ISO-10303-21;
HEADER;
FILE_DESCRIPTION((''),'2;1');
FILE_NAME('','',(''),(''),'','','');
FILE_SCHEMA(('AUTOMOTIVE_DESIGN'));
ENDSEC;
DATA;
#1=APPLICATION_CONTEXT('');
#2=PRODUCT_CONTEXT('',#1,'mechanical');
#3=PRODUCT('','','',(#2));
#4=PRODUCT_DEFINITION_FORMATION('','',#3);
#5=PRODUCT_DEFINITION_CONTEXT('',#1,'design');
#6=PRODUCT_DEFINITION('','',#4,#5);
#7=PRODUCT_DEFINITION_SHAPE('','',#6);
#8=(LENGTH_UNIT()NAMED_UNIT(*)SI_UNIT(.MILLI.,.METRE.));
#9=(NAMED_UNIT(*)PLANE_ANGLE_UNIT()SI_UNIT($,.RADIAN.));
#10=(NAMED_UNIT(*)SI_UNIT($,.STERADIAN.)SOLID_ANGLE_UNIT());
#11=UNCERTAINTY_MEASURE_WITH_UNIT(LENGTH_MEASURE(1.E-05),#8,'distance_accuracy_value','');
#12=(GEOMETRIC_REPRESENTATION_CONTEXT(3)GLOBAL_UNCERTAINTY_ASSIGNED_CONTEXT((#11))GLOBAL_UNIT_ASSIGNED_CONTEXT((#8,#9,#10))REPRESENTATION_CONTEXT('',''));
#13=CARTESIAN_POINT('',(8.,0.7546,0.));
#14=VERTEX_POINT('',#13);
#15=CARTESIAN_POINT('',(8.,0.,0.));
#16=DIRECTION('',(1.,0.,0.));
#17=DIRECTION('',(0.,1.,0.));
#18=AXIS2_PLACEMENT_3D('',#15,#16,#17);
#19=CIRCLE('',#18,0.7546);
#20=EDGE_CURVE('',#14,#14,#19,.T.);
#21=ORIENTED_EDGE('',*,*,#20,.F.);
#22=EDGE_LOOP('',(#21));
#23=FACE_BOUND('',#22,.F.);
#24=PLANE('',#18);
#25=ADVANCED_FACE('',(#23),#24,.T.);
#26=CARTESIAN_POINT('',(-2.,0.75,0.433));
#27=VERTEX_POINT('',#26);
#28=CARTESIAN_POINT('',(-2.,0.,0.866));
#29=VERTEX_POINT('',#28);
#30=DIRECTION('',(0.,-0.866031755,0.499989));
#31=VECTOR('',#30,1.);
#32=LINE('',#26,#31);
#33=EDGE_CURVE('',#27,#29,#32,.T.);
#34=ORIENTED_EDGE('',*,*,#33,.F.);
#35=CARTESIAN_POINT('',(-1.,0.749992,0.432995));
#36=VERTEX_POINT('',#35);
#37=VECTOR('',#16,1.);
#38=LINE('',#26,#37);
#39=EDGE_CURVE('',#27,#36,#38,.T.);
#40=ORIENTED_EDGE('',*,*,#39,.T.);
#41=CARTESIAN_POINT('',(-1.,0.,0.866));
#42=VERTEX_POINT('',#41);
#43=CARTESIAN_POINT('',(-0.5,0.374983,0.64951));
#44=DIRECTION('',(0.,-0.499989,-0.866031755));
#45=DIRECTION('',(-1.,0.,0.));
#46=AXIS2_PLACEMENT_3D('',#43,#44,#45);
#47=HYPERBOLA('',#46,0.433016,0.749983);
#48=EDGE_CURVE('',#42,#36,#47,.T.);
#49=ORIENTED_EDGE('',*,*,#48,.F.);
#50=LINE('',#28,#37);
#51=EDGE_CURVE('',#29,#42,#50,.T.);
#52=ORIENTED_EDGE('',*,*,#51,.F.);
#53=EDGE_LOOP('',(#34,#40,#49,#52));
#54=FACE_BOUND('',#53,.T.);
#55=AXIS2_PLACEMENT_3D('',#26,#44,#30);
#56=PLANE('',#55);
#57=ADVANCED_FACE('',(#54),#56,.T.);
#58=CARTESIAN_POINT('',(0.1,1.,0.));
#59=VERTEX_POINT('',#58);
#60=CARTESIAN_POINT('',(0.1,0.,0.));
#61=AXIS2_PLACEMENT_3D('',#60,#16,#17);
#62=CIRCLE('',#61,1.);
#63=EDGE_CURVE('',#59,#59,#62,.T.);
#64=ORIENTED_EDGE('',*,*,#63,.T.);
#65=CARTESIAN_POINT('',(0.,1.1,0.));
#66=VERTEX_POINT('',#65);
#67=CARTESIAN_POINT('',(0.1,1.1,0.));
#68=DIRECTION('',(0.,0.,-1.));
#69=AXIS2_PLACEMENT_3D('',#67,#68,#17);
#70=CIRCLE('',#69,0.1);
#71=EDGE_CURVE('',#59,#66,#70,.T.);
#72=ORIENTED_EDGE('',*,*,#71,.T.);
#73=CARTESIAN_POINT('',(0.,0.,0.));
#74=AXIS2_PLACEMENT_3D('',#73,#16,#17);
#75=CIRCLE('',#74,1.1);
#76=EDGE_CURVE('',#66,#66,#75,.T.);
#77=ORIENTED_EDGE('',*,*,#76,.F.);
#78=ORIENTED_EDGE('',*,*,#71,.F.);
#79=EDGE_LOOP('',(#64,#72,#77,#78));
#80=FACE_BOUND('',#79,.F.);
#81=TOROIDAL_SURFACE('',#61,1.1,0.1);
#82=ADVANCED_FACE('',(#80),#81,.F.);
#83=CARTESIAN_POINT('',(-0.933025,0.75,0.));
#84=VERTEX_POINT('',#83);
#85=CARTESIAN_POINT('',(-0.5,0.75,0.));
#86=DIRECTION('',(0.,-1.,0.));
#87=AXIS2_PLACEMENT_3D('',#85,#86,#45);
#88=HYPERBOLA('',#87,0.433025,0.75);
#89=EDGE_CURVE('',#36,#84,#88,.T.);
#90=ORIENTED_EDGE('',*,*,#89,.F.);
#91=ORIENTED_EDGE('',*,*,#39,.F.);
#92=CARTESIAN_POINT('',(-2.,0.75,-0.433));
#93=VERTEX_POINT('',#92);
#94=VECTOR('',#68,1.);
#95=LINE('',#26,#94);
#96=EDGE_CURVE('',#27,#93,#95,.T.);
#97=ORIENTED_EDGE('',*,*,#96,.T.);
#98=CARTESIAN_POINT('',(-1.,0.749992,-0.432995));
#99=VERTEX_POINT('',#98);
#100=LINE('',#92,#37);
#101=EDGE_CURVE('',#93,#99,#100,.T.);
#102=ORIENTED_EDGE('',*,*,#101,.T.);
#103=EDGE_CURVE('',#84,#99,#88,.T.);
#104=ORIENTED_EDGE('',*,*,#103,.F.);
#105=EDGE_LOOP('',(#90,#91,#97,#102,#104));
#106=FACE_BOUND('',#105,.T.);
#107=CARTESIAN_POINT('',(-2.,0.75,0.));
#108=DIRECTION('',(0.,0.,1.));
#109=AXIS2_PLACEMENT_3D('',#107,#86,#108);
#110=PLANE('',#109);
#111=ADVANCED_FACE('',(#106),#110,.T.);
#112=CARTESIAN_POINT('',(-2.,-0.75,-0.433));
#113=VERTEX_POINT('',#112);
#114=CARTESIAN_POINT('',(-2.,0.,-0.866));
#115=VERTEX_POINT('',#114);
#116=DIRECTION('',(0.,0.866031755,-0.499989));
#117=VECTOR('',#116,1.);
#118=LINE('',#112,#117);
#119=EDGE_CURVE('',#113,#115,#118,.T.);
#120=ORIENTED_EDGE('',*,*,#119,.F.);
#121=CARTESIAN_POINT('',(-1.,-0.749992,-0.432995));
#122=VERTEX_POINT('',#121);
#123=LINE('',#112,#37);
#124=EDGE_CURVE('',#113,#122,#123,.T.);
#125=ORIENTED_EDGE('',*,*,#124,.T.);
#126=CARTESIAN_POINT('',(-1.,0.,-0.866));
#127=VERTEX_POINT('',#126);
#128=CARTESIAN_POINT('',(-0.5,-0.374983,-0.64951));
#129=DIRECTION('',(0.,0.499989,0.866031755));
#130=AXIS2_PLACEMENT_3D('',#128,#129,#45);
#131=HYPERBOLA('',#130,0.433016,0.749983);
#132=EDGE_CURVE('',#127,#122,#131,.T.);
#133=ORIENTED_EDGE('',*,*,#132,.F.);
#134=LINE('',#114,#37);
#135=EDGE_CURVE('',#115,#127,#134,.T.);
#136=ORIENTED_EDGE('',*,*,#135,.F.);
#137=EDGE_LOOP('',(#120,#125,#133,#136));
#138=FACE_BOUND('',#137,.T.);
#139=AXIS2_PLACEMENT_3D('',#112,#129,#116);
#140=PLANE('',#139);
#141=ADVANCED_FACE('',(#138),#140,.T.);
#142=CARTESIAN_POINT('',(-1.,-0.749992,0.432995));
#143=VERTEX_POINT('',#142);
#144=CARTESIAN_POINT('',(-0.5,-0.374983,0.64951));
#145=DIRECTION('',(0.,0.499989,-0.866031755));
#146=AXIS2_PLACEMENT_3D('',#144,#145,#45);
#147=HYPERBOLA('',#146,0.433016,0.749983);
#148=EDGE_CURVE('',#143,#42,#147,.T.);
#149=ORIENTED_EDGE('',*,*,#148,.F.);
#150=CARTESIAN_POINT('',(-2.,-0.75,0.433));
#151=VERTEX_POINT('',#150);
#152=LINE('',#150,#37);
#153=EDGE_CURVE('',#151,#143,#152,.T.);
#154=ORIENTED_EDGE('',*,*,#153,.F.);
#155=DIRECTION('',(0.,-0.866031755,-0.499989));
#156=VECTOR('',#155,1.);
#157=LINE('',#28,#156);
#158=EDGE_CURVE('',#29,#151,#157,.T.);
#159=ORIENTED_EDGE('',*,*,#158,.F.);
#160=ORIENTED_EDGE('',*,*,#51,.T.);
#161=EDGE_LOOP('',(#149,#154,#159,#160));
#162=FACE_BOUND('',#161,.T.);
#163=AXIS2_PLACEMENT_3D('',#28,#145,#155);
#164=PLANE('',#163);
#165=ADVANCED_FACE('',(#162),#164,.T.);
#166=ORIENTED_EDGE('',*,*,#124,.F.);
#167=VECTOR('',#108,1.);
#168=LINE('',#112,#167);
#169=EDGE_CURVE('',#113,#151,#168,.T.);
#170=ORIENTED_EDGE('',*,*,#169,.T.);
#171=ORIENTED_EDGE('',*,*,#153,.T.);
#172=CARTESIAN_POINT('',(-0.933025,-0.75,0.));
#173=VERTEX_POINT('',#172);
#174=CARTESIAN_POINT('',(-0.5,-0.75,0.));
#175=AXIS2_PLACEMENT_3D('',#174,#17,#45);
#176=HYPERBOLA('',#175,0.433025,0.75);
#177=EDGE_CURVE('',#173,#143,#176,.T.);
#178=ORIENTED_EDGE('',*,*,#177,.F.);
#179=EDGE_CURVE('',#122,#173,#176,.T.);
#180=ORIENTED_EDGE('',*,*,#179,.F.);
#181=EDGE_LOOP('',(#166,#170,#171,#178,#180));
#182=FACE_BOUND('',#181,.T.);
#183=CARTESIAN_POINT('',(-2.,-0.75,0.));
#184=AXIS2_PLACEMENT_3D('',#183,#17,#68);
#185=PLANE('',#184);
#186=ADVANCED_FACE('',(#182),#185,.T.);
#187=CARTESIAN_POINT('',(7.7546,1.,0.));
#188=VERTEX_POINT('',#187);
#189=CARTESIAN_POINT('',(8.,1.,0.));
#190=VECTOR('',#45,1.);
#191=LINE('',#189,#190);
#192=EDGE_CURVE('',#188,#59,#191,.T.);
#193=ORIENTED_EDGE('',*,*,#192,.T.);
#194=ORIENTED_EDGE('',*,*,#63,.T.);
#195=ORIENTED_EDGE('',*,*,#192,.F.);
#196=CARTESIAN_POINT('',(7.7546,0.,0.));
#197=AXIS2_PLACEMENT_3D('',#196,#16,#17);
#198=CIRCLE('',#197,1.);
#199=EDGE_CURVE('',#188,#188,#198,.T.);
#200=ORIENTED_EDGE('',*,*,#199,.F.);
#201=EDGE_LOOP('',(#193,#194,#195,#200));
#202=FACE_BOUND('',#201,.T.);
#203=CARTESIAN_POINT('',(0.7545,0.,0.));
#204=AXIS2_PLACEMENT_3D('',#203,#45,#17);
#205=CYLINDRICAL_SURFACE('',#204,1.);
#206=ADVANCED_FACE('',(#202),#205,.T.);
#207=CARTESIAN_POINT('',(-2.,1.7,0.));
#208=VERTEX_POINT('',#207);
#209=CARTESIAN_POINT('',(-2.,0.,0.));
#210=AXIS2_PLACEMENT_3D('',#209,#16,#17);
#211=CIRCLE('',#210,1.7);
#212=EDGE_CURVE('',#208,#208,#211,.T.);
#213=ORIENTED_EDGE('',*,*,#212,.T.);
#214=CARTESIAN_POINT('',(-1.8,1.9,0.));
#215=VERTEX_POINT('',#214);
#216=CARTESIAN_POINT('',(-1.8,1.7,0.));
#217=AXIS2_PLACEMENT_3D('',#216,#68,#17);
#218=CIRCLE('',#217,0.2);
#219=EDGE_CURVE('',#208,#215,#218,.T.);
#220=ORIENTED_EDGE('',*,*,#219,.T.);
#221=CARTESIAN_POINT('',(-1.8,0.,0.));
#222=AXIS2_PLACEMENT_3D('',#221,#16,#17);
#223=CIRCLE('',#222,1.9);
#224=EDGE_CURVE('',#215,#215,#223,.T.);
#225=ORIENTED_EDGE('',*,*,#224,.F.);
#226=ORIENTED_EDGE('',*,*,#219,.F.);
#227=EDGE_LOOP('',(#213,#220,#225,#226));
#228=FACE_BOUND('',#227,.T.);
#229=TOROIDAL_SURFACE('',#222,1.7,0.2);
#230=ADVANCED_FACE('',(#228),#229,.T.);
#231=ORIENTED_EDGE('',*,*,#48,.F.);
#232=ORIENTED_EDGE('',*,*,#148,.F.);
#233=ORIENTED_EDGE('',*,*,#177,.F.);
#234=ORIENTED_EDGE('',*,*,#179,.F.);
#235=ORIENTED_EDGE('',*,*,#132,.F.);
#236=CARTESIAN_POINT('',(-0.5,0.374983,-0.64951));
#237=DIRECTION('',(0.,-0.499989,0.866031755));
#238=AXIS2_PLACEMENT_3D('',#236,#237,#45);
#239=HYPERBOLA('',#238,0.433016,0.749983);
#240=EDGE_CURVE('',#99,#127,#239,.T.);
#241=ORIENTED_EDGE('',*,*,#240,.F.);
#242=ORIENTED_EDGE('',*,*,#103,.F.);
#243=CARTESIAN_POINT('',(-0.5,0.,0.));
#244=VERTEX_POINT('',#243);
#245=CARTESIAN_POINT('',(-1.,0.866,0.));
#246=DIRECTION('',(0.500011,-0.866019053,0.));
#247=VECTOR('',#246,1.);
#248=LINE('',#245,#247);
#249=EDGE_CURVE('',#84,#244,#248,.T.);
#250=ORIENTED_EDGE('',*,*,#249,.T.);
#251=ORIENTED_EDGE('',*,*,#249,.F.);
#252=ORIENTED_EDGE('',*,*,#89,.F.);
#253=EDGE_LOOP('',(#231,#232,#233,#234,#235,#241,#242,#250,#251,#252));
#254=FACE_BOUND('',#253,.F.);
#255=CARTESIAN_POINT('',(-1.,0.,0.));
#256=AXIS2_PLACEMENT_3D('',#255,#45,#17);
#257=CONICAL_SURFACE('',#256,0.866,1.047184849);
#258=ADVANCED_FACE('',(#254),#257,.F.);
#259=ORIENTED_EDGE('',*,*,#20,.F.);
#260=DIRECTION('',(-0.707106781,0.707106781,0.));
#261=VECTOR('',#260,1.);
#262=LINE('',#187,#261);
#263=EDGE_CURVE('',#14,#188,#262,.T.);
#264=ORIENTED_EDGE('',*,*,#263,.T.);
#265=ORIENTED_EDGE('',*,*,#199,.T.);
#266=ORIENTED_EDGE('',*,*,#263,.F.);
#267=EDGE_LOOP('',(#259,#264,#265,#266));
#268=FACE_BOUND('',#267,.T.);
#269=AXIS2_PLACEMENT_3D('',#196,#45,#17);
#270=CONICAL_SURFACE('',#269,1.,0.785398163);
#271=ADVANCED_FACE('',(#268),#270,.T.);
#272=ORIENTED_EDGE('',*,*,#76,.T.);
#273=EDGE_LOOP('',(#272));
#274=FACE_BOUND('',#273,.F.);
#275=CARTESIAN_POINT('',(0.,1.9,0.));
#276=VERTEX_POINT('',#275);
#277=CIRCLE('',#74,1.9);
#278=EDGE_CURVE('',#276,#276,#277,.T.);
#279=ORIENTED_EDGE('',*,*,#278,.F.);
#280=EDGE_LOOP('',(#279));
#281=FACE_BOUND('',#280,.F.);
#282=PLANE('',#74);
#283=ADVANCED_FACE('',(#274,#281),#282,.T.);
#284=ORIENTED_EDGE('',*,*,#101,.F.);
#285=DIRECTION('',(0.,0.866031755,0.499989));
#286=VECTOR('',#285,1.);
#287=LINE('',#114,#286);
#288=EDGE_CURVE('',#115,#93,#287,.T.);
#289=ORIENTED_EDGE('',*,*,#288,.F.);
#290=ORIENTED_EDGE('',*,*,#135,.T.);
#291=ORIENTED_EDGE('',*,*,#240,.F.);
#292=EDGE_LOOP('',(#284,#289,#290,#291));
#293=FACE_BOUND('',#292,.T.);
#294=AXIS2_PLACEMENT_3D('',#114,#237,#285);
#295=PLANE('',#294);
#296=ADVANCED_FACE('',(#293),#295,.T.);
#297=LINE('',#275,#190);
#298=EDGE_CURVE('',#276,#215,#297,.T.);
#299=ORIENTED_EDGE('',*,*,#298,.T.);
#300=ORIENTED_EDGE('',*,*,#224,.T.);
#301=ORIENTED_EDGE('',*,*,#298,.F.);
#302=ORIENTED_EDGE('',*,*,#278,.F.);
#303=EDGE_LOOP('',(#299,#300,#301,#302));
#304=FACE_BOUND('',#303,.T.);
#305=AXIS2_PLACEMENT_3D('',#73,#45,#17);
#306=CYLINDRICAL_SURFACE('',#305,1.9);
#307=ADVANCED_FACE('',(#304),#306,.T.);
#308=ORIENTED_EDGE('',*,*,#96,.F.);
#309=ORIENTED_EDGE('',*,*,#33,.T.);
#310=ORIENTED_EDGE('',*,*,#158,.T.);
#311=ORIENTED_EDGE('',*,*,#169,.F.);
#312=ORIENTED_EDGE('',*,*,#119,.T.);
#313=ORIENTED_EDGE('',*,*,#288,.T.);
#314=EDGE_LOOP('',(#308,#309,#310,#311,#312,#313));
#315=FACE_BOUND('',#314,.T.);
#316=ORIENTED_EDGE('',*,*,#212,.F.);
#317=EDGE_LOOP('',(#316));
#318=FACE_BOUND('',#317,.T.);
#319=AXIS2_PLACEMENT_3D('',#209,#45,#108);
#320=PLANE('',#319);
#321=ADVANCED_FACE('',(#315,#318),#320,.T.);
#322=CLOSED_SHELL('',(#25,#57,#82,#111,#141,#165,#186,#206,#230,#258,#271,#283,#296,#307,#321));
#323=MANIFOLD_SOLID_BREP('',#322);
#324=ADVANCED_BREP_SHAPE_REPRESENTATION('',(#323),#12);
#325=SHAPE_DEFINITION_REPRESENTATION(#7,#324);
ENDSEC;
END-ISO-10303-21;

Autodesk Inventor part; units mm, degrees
ref_plane "YZ Plane" through (0, 0, 0) normal (1, 0, 0) x (0, 1, 0)
ref_plane "XZ Plane" through (0, 0, 0) normal (0, 1, 0) x (-1, 0, 0)
sketch "Sketch1" plane through (0, 0, 0) normal (0, 0, 1) x (1, 0, 0)
  line L0 (-0.5, 0) -> (8, 0)
  line L1 (8, 0) -> (8, 1)
  line L2 (8, 1) -> (1, 1)
  line L3 (1, 1) -> (0.7545, 1)
  line L4 (0.7545, 1) -> (0, 1)
  line L5 (0, 1) -> (0, 1.9)
  line L6 (0, 1.9) -> (-2, 1.9)
  line L7 (-2, 1.9) -> (-2, 0.866)
  line L8 (-2, 0.866) -> (-1, 0.866)
  line L9 (-1, 0.866) -> (-0.5, 0)
  line L10 (-4, 0) -> (10, 0) projected
  line L11 (0, -0.38) -> (0, 2.28) projected
  line L12 (1, 1) -> (0, 1) construction
  dimension "d1" = 7
  dimension "d2" = 0.2455
  dimension "d3" = 2
  dimension "d4" = 1
  dimension "d5" = 60
  dimension "d6" = 2
  dimension "d7" = 2
  dimension "d8" = 1.7321
  dimension "d9" = 3.8
  dimension "d26" = 8
revolve "Body" add sketch "Sketch1" angle 360 about axis through (-0.5, 0, 0) along (1, 0, 0)
sketch "Sketch2" plane through (-2, 0, 0) normal (-1, 0, 0) x (0, 0, 1)
  circle A0 centre (0, 0) radius 0.866 projected
  line L0 (0, -2.66) -> (0, 2.66) projected
  line L1 (-2.66, 0) -> (2.66, 0) projected
  line L2 (0.866, 0) -> (0.433, -0.75)
  line L3 (0.433, -0.75) -> (-0.433, -0.75)
  line L4 (-0.433, -0.75) -> (-0.866, 0)
  line L5 (-0.866, 0) -> (-0.433, 0.75)
  line L6 (-0.433, 0.75) -> (0.433, 0.75)
  line L7 (0.433, 0.75) -> (0.866, 0)
  point P0 (0, 0)
extrude "Slot" add sketch "Sketch2" against normal up to next contours L7 A0 | A0 L2 | L6 L0 A0 | A0 L0 L3 | L0 L6 A0 | A0 L3 L0 | L4 A0 | A0 L5
fillet "Fillet1" radius 0.2 1 edges at (-2, -1.9, 0)
thread "Thread" size "M2x0.4" class "6g" standard "ISO Metric profile" length 7
chamfer "Chamfer1" distance 0.2454 distance2 0.2454 1 edges at (8, -1, 0) measured on face at (8, 0.1182, 0.3117)
ref_plane "Work Plane1" through (29, 0, 0) normal (0, -1, 0) x (1, 0, 0)
fillet "Fillet2" radius 0.1 1 edges at (0, -1, 0)
equation "\"d30\" = R"
equation "\"d17\" = RR"
equation "\"d13\" = GEL"
equation "\"d15\" = -0.5 * SPD + 0.5 * GD"
equation "\"d16\" = GUL"
equation "\"d1\" = GEL"
equation "\"d3\" = KOH"
equation "\"d4\" = INTI"
equation "\"d6\" = GD"
equation "\"d7\" = BDM"
equation "\"d8\" = 1.1547 * SW"
equation "\"d9\" = KOD"
equation "\"d26\" = NLG"
equation "\"GD\" = 2"
equation "\"NLG\" = 8"
equation "\"GEL\" = 7"
equation "\"KOD\" = 3.8"
equation "\"KOH\" = 2"
equation "\"INTI\" = 1"
equation "\"GAL\" = 0.61345 * PTC"
equation "\"GUL\" = 0.61345 * PTC"
equation "\"BDM\" = NND"
equation "\"SW\" = 1.5"
equation "\"RR\" = 0.2"
equation "\"SPD\" = NND - 1.2269 * PTC"
equation "\"R\" = 0.1"
equation "\"TOA\" = 30deg"
equation "\"GD1\" = THREADDIA - 1.2269 * PTC"
equation "\"THREADDIA\" = 2"
equation "\"FAWI\" = 45deg"
equation "\"PTC\" = 0.4"
equation "\"NND\" = 2"
equation "\"E0\" = 1.155 * SW"
properties part number "ISO 4762 - M2 x 8" material "Stainless Steel, 440C"
